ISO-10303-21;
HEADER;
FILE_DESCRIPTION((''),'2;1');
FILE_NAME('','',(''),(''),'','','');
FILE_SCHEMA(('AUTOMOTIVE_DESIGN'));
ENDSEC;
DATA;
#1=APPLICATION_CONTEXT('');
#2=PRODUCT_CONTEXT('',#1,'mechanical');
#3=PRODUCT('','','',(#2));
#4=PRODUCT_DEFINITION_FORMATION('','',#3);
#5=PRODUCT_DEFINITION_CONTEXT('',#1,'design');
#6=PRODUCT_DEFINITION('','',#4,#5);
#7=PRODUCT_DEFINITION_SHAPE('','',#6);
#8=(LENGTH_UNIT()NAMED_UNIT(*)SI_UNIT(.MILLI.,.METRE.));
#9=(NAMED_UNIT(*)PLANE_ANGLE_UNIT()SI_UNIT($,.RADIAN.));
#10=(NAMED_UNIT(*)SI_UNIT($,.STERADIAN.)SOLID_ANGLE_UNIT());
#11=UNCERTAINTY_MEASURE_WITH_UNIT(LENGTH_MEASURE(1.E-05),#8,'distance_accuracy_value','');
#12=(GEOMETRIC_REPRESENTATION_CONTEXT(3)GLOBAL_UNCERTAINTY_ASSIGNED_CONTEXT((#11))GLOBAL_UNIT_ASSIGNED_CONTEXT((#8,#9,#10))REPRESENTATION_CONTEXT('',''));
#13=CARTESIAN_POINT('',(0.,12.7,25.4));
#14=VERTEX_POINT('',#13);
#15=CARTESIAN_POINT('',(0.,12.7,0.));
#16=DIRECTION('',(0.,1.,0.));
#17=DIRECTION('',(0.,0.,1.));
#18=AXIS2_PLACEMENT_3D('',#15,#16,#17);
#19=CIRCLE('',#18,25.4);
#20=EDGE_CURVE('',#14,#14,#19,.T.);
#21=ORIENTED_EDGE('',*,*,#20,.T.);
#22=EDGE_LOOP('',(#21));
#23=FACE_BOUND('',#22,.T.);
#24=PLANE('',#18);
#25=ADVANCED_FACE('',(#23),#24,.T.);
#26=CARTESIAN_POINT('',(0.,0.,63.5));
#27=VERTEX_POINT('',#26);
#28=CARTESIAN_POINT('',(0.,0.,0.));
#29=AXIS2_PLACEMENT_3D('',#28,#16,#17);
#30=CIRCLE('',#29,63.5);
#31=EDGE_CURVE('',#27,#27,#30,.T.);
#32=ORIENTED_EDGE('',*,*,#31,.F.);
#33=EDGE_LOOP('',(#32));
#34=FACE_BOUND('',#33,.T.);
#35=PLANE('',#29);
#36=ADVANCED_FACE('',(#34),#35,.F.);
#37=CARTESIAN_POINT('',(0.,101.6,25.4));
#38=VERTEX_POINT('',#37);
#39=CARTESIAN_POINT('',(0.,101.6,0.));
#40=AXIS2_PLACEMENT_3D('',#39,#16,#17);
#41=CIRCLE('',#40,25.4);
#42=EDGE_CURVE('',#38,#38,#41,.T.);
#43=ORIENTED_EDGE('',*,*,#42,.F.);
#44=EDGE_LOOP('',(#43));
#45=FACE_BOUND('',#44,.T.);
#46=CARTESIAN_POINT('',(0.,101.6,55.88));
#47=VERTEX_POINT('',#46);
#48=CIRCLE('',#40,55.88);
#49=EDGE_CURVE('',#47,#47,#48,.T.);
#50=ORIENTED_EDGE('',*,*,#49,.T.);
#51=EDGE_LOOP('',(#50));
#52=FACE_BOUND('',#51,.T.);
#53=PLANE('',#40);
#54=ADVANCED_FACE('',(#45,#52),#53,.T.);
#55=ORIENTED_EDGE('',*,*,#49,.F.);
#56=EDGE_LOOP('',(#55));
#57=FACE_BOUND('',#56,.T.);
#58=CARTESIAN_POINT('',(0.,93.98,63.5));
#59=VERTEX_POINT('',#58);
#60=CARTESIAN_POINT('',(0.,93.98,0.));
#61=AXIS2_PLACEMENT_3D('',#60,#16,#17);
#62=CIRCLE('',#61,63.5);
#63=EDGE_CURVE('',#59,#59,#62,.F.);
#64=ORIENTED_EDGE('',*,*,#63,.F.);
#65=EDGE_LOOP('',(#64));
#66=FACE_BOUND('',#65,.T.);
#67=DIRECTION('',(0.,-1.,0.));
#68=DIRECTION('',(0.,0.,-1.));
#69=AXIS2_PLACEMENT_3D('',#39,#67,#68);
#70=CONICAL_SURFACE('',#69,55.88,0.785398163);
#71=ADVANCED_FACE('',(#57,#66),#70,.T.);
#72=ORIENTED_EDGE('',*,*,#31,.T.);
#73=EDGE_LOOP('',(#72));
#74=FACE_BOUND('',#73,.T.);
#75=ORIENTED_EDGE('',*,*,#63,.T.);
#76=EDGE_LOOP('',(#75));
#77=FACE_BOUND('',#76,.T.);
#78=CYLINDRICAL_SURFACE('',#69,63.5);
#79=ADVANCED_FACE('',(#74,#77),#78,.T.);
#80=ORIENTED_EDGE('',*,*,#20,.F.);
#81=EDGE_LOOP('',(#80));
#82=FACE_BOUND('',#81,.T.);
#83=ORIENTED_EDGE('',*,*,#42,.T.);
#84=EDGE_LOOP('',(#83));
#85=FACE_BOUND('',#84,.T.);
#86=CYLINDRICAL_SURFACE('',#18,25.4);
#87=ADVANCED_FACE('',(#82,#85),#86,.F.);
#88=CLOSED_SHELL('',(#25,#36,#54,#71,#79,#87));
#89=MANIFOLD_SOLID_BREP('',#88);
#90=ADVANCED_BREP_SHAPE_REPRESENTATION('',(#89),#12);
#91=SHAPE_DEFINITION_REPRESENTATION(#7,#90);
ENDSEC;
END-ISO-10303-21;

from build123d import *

# Parameters (mm, degrees)
SKETCH1_R           = 63.5
BOSS_EXTRUDE1_DEPTH = 101.6
SKETCH2_R           = 25.4
CUT_EXTRUDE1_DEPTH  = 88.9
FILLET1_SIZE        = 7.62


with BuildPart() as part:
    # Sketch1 → Boss-Extrude1 (new body)
    with BuildSketch(Plane(origin=(0, 0, 0), x_dir=(1, 0, 0), z_dir=(0, 1, 0))):
        Circle(SKETCH1_R)
    extrude(amount=BOSS_EXTRUDE1_DEPTH)

    # Sketch2 → Cut-Extrude1 (cut)
    with BuildSketch(Plane(origin=(0, 101.6, 0), x_dir=(1, 0, 0), z_dir=(0, 1, 0))):
        Circle(SKETCH2_R)
    extrude(amount=-CUT_EXTRUDE1_DEPTH, mode=Mode.SUBTRACT)

    # Fillet1
    fillet1_edges = [part.edges().sort_by_distance(p)[0] for p in [
        (-63.5, 101.6, 0),
    ]]
    chamfer(fillet1_edges, length=FILLET1_SIZE)


solid = part.part
